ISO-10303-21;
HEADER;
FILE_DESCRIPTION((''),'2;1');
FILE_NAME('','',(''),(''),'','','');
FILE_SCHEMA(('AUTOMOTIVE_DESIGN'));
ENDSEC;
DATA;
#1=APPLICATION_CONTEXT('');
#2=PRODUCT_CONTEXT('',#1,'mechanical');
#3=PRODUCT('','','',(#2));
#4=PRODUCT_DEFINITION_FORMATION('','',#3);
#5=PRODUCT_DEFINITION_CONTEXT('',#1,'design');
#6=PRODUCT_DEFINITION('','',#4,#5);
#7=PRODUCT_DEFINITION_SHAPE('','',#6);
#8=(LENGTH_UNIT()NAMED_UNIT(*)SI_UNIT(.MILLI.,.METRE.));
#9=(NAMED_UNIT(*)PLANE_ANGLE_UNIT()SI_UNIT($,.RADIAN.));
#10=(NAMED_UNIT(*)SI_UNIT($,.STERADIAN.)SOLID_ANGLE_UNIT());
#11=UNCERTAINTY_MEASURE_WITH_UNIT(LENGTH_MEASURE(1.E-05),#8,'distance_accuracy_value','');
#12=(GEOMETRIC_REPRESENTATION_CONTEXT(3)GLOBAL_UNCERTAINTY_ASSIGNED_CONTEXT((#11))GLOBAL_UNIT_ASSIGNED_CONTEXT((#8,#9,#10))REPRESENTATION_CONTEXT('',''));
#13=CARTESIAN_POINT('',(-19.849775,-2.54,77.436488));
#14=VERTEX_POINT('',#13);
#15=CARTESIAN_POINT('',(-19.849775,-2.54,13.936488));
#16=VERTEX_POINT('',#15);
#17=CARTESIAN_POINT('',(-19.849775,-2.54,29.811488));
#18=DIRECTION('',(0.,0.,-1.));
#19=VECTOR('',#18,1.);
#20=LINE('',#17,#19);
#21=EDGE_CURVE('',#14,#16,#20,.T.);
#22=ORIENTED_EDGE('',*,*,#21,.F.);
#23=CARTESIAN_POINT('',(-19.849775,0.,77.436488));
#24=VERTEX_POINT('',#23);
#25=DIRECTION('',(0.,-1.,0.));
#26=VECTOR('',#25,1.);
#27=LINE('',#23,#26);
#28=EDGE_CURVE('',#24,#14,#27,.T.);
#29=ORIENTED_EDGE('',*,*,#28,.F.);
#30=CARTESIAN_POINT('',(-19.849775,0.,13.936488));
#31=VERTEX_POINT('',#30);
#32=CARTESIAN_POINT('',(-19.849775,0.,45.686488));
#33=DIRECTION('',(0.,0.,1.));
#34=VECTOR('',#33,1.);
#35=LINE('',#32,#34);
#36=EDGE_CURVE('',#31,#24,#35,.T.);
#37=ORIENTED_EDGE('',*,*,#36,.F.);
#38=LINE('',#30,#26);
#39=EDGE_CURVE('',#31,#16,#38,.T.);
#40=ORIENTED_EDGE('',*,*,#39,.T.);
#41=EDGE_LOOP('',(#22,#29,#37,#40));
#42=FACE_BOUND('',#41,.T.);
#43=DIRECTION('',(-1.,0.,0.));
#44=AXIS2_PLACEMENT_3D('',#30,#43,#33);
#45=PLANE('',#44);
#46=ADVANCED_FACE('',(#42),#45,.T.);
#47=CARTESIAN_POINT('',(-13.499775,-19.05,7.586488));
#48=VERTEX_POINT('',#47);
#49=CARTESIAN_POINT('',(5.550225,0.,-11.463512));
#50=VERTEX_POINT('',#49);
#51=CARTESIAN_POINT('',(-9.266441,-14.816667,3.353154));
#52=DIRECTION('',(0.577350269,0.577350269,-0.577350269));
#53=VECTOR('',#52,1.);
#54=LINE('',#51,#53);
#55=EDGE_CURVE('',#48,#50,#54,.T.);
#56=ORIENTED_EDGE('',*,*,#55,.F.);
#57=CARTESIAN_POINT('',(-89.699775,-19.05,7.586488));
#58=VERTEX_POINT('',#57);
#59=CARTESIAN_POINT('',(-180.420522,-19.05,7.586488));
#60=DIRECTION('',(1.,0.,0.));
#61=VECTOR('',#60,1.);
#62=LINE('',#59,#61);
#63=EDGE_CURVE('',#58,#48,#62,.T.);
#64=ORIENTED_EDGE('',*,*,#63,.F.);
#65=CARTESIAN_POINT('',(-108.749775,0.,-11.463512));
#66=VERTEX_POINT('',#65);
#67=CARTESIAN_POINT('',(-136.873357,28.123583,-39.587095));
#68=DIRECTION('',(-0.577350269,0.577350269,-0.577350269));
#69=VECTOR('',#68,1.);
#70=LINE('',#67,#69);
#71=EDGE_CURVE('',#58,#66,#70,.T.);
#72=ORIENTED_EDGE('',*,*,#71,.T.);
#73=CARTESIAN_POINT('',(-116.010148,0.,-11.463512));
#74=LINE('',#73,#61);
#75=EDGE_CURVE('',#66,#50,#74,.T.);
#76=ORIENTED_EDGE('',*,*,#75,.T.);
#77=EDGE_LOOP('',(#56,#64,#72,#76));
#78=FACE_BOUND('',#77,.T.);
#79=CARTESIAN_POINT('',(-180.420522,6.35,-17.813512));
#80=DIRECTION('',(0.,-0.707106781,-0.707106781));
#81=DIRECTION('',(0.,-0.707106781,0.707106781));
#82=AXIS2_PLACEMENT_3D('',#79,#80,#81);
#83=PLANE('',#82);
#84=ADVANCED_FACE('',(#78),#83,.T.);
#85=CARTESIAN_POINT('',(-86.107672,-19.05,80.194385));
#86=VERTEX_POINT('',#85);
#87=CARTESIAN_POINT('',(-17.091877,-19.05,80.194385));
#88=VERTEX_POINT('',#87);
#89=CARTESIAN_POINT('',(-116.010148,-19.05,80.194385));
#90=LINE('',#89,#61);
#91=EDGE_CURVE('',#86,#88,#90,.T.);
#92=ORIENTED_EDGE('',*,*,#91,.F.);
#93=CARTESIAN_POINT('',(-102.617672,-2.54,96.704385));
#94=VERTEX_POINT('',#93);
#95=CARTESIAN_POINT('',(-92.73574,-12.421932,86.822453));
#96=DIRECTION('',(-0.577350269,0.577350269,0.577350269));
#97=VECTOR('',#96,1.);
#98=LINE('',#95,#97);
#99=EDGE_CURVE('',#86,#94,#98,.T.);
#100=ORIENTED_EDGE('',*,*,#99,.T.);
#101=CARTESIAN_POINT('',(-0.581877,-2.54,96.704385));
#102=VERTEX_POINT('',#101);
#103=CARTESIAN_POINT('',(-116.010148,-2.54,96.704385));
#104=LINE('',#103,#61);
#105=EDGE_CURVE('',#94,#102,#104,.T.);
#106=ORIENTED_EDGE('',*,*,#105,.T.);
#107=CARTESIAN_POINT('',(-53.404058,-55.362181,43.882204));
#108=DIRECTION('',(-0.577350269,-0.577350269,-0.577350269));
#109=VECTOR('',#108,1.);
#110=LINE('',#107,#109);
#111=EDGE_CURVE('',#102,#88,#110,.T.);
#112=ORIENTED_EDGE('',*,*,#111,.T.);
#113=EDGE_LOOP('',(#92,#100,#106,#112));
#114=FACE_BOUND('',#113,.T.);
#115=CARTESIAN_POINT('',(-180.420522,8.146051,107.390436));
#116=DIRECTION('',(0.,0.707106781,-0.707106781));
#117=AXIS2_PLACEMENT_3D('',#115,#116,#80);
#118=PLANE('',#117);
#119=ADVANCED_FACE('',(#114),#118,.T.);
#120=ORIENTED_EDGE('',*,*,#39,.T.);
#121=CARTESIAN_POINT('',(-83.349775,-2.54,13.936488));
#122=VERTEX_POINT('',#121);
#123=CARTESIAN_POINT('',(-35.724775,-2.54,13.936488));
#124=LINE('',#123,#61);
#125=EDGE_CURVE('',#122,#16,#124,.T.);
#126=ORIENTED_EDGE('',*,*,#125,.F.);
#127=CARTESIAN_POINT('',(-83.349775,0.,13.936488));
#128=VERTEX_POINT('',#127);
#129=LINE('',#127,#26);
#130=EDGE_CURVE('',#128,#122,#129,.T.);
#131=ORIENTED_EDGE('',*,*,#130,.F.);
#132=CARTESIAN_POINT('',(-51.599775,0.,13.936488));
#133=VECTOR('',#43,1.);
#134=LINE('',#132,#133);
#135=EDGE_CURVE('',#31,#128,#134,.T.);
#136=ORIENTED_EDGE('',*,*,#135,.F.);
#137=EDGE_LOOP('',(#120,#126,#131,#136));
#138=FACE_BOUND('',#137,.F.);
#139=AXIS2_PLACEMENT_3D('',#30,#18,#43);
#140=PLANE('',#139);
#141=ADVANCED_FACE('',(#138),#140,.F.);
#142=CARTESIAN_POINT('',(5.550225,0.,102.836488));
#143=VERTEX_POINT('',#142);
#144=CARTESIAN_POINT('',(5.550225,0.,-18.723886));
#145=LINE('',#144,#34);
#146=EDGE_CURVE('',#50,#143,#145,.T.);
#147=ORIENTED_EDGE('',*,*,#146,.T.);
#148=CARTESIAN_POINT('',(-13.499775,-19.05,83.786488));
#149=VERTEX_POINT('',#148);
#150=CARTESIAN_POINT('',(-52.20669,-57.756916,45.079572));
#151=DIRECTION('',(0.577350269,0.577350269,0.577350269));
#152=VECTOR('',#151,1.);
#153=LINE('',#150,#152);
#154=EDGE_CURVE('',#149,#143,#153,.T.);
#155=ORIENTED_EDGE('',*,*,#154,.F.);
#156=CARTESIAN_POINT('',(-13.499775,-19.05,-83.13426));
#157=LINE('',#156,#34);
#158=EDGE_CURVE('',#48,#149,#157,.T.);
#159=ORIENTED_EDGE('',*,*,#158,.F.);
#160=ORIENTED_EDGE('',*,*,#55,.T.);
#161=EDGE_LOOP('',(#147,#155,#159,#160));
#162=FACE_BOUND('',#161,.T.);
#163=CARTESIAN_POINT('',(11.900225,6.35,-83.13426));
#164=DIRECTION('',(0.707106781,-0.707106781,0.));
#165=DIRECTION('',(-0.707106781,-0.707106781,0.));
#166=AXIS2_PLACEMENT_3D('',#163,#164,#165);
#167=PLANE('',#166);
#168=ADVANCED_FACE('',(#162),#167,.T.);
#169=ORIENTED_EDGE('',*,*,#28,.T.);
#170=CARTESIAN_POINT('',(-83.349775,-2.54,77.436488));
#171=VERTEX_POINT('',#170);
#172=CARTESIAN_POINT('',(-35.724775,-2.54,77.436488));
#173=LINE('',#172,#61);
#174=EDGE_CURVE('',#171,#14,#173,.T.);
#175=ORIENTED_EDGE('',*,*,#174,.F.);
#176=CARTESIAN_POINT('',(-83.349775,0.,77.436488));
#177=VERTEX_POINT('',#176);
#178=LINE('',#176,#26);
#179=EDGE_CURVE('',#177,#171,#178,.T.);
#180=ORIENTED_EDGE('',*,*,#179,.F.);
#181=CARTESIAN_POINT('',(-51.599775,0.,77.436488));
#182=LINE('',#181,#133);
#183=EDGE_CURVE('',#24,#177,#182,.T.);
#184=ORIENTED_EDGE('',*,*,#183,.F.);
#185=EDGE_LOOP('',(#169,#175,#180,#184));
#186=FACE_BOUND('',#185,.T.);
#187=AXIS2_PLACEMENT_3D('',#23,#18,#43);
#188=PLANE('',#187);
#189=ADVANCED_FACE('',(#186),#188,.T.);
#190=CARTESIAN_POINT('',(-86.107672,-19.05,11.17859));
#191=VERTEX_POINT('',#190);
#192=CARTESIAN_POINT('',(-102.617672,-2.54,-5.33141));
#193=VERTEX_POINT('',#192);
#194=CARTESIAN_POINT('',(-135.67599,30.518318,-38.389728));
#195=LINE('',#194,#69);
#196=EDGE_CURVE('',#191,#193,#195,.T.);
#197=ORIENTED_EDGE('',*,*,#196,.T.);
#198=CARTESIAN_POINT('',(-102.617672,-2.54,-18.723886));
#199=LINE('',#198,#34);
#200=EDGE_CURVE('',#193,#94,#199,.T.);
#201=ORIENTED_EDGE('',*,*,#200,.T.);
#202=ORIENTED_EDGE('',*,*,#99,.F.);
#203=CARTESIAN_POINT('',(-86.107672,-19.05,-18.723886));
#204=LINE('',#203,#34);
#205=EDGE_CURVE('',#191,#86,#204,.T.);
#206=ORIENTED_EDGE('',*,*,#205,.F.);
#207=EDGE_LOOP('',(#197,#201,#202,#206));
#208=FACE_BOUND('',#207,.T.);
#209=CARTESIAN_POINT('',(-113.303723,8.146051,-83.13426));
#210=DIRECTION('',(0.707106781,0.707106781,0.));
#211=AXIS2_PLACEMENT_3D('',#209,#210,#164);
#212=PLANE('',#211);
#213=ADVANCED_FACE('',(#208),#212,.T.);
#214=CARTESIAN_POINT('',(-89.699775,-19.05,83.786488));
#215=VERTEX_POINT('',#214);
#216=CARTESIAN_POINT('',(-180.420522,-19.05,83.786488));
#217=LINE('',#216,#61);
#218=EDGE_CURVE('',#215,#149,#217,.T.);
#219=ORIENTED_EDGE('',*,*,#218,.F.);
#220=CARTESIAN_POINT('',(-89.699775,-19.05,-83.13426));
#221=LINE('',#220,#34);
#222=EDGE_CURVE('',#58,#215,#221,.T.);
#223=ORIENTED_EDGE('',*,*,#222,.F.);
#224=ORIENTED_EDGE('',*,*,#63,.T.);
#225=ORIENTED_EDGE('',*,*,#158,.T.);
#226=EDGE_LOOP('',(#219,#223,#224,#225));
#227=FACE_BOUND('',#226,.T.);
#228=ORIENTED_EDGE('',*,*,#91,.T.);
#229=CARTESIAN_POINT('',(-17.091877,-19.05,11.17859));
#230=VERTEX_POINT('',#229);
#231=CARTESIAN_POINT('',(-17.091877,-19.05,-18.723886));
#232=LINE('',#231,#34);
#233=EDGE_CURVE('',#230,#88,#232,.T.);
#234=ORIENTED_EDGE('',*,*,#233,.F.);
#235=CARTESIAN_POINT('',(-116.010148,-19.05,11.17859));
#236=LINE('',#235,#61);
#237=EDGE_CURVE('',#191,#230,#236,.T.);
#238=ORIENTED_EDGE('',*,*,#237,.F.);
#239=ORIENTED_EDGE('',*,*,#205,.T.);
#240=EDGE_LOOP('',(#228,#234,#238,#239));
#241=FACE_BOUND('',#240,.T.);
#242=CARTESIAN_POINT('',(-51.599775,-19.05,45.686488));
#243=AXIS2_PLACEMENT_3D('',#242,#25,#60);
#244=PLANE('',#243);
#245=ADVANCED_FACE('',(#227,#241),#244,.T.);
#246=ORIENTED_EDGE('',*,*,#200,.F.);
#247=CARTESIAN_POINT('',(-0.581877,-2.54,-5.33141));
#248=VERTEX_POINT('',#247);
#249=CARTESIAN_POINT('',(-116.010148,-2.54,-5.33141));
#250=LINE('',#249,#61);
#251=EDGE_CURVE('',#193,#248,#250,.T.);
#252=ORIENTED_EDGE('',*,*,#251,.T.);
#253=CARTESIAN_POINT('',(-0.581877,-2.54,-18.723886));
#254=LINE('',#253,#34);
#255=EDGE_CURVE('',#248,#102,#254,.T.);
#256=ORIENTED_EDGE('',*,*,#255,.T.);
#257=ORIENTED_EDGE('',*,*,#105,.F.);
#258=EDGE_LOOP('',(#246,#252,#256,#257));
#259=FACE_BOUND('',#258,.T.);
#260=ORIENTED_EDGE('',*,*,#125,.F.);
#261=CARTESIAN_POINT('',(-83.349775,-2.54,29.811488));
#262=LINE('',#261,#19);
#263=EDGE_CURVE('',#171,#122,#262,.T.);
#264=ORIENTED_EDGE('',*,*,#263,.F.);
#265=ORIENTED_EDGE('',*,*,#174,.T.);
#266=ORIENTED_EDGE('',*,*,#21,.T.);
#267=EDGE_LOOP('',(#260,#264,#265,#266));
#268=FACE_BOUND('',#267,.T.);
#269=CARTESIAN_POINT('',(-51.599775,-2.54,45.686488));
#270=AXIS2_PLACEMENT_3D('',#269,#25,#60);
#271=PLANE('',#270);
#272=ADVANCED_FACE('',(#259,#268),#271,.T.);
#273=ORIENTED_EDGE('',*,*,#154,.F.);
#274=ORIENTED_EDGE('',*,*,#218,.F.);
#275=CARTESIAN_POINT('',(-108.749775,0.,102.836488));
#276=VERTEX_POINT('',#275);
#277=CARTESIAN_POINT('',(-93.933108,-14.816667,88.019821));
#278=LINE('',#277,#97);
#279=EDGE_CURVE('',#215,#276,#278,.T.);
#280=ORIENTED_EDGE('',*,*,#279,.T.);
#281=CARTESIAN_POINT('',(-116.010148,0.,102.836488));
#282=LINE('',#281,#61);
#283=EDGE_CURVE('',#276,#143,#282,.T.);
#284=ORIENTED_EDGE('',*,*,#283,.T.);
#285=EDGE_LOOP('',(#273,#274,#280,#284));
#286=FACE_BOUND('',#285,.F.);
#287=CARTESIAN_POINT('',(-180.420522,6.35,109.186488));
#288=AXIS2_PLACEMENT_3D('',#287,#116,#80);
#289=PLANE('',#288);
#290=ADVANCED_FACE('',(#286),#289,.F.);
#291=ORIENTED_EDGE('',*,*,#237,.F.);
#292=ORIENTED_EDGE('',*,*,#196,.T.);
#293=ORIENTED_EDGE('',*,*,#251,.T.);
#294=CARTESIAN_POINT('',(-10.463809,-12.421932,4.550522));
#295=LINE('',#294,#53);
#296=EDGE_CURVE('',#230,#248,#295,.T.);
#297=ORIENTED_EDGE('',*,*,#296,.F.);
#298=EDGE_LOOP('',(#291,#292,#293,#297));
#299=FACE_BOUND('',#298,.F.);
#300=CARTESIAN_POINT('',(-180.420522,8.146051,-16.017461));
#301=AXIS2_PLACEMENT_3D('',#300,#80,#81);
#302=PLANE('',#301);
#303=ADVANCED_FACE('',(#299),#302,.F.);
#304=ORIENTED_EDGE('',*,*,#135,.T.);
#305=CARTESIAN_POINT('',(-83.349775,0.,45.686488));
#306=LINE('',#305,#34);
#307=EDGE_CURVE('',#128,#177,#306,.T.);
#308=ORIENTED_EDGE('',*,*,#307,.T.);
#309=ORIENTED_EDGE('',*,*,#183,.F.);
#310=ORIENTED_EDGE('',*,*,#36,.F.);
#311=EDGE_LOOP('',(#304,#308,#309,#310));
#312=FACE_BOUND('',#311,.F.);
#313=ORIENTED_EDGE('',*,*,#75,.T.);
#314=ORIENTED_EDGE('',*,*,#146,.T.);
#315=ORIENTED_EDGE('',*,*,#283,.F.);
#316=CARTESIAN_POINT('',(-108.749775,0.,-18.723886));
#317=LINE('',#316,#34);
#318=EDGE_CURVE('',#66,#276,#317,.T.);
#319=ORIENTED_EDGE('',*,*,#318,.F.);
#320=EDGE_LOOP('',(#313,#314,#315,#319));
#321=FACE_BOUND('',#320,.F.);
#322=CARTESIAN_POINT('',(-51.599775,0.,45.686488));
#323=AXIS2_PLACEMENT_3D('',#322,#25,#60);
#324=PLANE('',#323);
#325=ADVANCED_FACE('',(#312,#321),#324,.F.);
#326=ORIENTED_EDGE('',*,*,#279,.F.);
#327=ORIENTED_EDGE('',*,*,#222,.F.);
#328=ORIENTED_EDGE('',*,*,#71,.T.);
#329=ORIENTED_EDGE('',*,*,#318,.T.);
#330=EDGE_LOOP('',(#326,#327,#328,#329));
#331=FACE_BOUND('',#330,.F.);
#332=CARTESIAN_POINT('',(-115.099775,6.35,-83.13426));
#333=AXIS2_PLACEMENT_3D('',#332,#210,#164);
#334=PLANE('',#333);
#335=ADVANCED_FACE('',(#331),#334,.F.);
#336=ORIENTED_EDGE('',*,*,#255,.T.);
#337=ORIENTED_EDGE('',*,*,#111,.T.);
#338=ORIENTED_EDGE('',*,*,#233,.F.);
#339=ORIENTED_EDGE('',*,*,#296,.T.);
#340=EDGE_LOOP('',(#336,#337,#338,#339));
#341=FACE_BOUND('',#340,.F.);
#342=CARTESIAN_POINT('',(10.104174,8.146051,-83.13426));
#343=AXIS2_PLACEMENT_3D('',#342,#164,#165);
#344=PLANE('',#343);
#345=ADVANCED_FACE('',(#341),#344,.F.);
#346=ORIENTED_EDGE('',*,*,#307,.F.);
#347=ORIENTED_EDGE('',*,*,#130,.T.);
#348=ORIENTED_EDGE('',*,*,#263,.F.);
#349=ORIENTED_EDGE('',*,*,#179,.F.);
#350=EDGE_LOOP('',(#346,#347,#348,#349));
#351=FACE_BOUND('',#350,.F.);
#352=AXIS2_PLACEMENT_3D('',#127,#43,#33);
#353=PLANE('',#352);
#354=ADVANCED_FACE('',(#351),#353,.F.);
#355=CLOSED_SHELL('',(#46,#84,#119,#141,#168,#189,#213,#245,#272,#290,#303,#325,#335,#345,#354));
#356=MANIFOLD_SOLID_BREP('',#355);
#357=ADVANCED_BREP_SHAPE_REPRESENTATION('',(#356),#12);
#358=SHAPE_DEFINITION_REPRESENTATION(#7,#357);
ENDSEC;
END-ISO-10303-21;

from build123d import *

# Parameters (mm, degrees)
F0_W        = 127
F0_H        = 127
F1_DEPTH    = 19.05
F2_T1_DEPTH = 257.6414957887
F2_T3_DEPTH = 257.6414957887
F3_T        = -2.54
F4_W        = 63.5
F4_H        = 63.5
F5_DEPTH    = 25.4


# Not quite as in the source:
# - a fillet or chamfer that OpenCascade refuses, or shapes differently, is made with other operations: its cross-section is extruded or revolved along the edge and cut away or added


with BuildPart() as f1:
    # F0 (on Front) → F1 (new body)
    with BuildSketch(Plane.XZ):
        with Locations((-51.5997745097, 45.6864875067)):
            Rectangle(F0_W, F0_H)
    extrude(amount=F1_DEPTH)

    # F2: chamfer of 25.4 on 4 edges, made by hand

    # F2_s2 → F2_t1 (cut)
    with BuildSketch(Plane.XY.offset(-83.1342603876)):
        Polygon((11.9002254903, 6.35), (-13.4997745097, -19.05), (11.9002254903, -19.05), align=None)
        Polygon((-115.0997745097, 6.35), (-89.6997745097, -19.05), (-115.0997745097, -19.05), align=None)
    extrude(amount=F2_T1_DEPTH, mode=Mode.SUBTRACT)

    # F2_s4 → F2_t3 (cut)
    with BuildSketch(Plane.YZ.offset(-180.420522404)):
        Polygon((6.35, 109.1864875067), (-19.05, 83.7864875067), (-19.05, 109.1864875067), align=None)
        Polygon((6.35, -17.8135124933), (-19.05, 7.5864875067), (-19.05, -17.8135124933), align=None)
    extrude(amount=F2_T3_DEPTH, mode=Mode.SUBTRACT)

    # F3
    f3_openings = [f1.faces().sort_by_distance(p)[0] for p in [
        (-51.599775, -19.05, 45.686488),
    ]]
    offset(amount=F3_T, openings=f3_openings, kind=Kind.INTERSECTION)

    # F4 (on face) → F5 (cut)
    with BuildSketch(Plane(origin=(0, 0, 0), x_dir=(-1, 0, 0), z_dir=(0, 1, 0))):
        with Locations((51.5997745097, 45.6864875067)):
            Rectangle(F4_W, F4_H)
    extrude(amount=-F5_DEPTH, mode=Mode.SUBTRACT)


solid = f1.part
